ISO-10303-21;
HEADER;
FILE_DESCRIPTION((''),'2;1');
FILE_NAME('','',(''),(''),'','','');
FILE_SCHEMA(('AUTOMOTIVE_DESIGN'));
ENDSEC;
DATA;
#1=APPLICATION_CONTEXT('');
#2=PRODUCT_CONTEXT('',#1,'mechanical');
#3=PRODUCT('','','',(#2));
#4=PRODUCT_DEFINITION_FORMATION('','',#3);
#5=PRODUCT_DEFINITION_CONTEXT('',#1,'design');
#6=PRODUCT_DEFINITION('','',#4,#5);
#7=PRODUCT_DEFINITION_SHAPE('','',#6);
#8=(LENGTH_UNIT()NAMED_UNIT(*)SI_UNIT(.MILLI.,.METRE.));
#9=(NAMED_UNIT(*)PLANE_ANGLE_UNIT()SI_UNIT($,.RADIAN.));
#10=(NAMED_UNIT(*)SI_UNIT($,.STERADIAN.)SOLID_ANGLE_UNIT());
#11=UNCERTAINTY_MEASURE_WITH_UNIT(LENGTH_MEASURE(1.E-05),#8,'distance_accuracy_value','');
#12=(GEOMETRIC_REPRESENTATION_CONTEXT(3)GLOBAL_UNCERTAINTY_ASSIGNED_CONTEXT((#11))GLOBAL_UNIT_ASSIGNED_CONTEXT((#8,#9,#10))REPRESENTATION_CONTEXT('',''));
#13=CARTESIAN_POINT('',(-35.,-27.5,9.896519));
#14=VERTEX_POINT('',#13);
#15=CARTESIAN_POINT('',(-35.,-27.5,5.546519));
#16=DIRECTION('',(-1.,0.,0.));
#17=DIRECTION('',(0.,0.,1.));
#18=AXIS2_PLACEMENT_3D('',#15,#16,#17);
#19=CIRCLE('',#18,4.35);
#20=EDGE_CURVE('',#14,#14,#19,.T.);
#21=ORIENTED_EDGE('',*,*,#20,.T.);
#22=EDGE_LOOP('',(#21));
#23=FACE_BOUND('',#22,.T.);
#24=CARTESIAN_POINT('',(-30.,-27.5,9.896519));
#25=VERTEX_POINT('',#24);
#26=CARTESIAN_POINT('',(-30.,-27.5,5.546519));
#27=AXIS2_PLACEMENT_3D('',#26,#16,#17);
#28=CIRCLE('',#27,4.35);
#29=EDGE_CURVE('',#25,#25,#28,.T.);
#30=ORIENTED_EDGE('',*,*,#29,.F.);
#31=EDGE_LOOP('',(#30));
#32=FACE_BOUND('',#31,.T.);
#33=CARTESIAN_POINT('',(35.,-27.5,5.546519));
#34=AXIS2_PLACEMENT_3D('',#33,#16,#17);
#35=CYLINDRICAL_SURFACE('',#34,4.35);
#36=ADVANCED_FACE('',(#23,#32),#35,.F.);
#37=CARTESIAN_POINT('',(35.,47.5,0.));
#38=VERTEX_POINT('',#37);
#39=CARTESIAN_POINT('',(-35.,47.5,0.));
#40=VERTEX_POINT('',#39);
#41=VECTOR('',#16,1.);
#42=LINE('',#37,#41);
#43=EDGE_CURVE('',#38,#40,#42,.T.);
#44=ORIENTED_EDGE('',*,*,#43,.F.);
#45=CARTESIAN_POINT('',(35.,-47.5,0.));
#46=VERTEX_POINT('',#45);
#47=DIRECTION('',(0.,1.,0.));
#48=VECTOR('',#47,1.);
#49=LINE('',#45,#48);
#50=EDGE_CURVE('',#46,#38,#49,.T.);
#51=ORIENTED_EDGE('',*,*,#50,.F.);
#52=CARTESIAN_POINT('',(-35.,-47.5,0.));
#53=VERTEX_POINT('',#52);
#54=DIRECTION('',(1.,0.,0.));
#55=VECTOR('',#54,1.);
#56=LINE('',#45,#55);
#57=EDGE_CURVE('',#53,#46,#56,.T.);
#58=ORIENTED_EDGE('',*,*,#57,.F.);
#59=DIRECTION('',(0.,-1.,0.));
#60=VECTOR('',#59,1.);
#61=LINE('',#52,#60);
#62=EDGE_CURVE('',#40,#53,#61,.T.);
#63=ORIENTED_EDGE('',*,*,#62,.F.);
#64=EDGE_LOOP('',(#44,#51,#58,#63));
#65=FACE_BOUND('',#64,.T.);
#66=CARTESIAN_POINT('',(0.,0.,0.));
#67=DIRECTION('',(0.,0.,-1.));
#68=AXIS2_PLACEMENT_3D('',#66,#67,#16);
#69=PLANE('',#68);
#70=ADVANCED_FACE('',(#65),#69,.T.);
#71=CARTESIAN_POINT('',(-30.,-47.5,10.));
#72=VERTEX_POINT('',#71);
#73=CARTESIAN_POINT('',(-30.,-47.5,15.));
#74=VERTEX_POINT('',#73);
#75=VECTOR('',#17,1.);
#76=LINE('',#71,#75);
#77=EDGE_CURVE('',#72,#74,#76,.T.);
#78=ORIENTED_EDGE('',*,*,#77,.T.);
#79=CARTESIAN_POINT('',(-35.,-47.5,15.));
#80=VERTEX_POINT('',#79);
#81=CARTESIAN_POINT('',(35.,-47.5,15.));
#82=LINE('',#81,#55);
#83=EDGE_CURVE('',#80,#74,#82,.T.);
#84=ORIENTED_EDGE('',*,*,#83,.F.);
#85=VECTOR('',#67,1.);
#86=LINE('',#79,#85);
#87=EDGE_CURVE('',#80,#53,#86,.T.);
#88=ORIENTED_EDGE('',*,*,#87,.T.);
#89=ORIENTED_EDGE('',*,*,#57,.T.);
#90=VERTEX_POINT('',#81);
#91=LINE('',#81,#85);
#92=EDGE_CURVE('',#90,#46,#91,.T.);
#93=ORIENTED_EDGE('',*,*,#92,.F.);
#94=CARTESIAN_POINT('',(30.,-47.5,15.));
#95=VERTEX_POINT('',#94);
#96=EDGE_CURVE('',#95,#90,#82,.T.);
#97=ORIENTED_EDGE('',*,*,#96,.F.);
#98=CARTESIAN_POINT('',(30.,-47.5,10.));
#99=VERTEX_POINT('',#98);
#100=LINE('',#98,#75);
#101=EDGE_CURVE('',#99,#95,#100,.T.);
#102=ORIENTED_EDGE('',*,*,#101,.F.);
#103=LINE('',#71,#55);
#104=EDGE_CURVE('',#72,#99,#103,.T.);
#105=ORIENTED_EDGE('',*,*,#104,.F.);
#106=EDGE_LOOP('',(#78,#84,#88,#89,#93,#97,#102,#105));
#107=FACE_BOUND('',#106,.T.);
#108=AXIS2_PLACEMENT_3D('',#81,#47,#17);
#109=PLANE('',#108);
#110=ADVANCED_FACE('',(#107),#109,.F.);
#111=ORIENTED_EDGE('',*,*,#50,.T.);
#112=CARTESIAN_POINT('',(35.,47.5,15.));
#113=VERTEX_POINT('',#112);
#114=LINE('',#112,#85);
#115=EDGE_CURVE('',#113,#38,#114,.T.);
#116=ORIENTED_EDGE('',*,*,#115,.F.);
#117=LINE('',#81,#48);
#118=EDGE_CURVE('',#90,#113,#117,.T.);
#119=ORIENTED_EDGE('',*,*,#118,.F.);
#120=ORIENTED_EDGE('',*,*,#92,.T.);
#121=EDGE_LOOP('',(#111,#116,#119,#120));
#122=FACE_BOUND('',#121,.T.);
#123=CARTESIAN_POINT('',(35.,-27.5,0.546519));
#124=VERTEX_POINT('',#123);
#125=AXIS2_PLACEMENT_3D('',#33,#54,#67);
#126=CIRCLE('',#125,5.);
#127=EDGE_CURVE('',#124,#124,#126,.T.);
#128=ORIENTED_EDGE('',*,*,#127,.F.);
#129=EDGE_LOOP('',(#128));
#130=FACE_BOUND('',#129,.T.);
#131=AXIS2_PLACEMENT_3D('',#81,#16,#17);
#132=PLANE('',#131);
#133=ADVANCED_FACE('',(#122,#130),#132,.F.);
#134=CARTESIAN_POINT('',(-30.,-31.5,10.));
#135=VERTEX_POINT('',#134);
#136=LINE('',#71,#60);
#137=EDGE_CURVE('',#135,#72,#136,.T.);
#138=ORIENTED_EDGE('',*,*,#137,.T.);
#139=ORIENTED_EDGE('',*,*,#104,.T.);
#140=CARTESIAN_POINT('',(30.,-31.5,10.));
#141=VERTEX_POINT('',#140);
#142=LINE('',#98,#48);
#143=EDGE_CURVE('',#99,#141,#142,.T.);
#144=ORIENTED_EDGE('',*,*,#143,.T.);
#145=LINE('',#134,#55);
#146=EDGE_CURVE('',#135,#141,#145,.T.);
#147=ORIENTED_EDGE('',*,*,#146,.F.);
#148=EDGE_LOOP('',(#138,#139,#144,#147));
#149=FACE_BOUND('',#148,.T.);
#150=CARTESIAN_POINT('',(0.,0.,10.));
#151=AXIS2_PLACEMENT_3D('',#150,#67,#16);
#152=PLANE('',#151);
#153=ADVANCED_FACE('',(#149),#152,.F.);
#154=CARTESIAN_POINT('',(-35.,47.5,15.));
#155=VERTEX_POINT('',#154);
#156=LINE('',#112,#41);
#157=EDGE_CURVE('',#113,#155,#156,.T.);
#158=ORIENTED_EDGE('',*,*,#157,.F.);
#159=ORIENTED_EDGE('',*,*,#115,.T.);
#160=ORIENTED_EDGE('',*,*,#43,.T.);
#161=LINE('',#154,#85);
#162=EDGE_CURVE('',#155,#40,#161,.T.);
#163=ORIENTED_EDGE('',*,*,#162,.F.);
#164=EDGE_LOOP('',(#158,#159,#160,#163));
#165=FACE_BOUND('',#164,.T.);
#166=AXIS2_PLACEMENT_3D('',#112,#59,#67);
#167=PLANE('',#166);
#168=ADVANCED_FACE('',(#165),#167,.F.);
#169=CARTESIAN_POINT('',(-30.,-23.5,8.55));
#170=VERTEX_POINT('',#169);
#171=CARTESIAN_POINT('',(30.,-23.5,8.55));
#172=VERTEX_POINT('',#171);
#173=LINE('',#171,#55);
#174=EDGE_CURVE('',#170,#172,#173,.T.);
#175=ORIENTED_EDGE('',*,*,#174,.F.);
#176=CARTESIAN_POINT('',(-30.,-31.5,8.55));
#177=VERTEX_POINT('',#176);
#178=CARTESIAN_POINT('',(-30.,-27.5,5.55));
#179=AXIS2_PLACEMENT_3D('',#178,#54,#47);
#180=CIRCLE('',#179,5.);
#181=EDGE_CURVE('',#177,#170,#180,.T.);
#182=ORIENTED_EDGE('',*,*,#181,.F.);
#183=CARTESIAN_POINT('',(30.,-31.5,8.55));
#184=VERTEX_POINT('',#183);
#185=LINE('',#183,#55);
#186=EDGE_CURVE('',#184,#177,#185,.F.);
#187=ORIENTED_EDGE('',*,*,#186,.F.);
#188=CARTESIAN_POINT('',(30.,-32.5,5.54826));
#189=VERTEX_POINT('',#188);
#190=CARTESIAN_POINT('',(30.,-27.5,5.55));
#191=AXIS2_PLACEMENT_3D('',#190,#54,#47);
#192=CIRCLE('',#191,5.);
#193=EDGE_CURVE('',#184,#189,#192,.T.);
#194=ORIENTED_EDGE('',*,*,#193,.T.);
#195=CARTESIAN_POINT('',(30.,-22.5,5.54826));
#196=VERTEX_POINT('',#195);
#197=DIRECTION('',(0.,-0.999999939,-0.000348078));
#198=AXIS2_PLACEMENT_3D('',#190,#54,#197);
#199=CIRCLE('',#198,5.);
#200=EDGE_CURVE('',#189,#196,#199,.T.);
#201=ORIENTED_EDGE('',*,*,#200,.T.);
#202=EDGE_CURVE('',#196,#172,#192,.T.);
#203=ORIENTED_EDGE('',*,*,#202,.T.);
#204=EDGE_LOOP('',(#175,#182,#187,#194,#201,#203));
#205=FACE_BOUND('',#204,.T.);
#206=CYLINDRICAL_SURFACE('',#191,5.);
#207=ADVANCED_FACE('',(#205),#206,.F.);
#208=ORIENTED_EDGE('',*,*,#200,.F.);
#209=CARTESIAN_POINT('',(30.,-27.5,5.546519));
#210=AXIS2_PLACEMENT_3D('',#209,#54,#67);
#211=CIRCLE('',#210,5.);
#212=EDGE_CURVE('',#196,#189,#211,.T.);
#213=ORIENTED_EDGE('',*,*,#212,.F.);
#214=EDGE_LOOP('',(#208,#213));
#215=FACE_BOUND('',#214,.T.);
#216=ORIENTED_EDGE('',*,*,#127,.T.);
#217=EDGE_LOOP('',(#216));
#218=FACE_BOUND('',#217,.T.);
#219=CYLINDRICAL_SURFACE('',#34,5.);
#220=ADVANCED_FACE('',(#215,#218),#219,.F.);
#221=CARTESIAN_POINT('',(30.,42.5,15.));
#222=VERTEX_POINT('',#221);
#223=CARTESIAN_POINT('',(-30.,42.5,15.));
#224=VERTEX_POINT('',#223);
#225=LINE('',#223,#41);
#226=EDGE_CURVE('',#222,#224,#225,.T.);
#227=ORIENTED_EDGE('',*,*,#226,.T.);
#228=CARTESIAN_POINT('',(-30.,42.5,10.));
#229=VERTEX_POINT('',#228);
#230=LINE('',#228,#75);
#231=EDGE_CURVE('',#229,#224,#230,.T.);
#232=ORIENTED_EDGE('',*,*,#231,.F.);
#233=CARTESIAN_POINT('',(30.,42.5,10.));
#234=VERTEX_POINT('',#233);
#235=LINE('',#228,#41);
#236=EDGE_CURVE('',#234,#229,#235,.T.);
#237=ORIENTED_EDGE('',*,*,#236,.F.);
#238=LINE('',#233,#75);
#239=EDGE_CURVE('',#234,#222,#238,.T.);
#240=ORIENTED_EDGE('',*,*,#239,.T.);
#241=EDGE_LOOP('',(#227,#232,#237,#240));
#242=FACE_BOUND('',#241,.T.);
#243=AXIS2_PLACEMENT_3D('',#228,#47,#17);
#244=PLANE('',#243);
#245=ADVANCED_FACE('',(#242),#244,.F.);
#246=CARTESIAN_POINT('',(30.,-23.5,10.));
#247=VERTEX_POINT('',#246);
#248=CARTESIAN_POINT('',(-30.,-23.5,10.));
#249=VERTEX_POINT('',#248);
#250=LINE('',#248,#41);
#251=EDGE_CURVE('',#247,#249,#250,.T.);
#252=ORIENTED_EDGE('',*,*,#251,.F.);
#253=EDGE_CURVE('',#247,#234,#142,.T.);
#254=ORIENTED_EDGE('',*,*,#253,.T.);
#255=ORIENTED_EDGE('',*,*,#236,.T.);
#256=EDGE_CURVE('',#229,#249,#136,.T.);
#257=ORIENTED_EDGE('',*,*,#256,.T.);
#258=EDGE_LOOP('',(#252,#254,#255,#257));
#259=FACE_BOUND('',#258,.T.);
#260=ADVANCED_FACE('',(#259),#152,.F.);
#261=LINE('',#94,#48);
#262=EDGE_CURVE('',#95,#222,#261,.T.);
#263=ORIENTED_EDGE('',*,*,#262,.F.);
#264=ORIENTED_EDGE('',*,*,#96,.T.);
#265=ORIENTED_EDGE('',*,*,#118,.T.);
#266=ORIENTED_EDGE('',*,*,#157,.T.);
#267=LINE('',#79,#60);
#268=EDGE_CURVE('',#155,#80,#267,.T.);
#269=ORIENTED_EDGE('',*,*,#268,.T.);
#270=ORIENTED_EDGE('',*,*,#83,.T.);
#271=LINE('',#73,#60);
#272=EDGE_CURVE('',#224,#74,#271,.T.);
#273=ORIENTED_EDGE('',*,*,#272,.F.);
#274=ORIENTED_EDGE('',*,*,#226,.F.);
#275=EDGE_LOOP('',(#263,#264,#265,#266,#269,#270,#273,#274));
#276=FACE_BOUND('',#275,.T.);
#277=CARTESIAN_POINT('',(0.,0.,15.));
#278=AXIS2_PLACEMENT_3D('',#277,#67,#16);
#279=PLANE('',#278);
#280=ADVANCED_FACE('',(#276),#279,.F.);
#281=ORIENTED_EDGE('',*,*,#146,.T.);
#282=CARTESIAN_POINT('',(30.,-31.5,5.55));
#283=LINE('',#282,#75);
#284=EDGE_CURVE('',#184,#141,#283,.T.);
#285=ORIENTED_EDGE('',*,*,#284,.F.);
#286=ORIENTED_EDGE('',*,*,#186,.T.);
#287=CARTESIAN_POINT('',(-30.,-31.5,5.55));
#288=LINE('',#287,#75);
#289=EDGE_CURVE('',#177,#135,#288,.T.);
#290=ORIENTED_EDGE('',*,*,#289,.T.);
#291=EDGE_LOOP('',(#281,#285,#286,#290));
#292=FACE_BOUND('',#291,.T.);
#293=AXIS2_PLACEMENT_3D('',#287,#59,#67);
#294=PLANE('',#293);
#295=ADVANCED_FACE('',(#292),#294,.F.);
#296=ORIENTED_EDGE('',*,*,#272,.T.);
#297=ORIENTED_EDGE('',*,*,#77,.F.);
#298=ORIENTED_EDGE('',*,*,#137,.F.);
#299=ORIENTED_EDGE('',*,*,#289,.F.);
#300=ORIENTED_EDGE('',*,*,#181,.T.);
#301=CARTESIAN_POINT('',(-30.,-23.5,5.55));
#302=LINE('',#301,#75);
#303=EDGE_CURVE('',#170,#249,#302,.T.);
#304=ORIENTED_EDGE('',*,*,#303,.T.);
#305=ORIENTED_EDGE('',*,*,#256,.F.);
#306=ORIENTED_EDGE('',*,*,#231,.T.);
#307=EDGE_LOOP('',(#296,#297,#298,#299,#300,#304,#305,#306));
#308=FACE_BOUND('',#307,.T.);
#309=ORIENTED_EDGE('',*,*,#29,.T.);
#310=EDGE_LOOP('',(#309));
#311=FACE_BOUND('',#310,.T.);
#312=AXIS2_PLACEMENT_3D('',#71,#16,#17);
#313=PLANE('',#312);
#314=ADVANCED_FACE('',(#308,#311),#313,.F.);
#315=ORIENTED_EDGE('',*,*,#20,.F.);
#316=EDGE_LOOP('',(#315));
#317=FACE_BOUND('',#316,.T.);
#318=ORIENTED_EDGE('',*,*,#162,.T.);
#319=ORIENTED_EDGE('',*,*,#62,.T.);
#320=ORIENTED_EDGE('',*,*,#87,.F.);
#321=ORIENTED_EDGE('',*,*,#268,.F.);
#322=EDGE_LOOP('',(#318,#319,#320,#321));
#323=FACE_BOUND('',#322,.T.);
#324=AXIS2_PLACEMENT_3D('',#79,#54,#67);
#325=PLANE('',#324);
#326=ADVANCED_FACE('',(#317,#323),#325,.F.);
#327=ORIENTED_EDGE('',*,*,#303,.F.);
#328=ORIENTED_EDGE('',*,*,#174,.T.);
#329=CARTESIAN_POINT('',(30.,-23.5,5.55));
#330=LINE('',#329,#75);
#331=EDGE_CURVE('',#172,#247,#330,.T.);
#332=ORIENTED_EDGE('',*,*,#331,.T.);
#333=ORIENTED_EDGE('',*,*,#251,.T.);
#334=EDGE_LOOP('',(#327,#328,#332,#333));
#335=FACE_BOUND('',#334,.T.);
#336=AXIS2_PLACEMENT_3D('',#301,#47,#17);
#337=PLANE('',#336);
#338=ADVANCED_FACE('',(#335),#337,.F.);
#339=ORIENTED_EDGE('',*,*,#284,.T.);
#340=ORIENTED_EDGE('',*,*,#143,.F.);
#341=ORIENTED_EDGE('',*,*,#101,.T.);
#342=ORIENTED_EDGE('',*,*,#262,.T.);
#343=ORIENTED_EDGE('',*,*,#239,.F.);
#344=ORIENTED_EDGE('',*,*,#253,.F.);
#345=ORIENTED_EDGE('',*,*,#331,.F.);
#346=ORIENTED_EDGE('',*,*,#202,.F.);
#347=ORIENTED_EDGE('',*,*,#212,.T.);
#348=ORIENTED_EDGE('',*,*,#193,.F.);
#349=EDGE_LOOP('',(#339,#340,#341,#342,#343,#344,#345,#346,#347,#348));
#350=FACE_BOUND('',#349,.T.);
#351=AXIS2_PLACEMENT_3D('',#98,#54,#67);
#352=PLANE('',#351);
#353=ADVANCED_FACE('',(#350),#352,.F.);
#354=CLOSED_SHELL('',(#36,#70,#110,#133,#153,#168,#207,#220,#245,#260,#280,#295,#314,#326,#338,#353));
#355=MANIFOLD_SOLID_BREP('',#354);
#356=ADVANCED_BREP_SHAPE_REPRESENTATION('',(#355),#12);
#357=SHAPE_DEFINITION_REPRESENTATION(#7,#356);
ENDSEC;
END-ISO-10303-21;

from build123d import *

# Parameters (mm, degrees)
SKETCH1_W               = 95
SKETCH1_H               = 70
BOSS_EXTRUDE1_DEPTH     = 15
SKETCH2_W               = 60
SKETCH2_H               = 90
CUT_EXTRUDE1_DEPTH      = 5
SKETCH4_W               = 60
SKETCH4_H               = 8
CUT_EXTRUDE2_DEPTH      = 4.45
CUT_REVOLVE_THIN1_START = -30
CUT_REVOLVE_THIN1_DEPTH = 60
SKETCH3_R               = 5
CUT_EXTRUDE3_DEPTH      = 82.891696771
SKETCH6_R               = 4.35
CUT_EXTRUDE4_DEPTH      = 86.914201387


# Read off the part's stored shape, not the designer's step: Cut-Revolve-Thin1
with BuildPart() as part:
    # Sketch1 → Boss-Extrude1 (new body)
    with BuildSketch(Plane(origin=(0, 0, 0), x_dir=(0, 1, 0), z_dir=(0, 0, 1))):
        Rectangle(SKETCH1_W, SKETCH1_H)
    extrude(amount=BOSS_EXTRUDE1_DEPTH)

    # Sketch2 → Cut-Extrude1 (cut)
    with BuildSketch(Plane.XY.offset(15)):
        with Locations((0, -2.5)):
            Rectangle(SKETCH2_W, SKETCH2_H)
    extrude(amount=-CUT_EXTRUDE1_DEPTH, mode=Mode.SUBTRACT)

    # Sketch4 → Cut-Extrude2 (cut)
    with BuildSketch(Plane.XY.offset(10)):
        with Locations((0, -27.5)):
            Rectangle(SKETCH4_W, SKETCH4_H)
    extrude(amount=-CUT_EXTRUDE2_DEPTH, mode=Mode.SUBTRACT)

    # Cut-Revolve-Thin1 outline → Cut-Revolve-Thin1 (cut)
    with BuildSketch(Plane.YZ.offset(CUT_REVOLVE_THIN1_START)):
        with BuildLine():
            Line((-31.5, 5.55), (-31.5, 8.55))
            ThreePointArc((-31.5, 8.55), (-27.5, 0.55), (-23.5, 8.55))
            Line((-23.5, 8.55), (-23.5, 5.55))
            Line((-23.5, 5.55), (-31.5, 5.55))
        make_face()
    extrude(amount=CUT_REVOLVE_THIN1_DEPTH, mode=Mode.SUBTRACT)

    # Sketch3 → Cut-Extrude3 (cut, through all)
    with BuildSketch(Plane(origin=(30, 0, 0), x_dir=(0, -1, 0), z_dir=(-1, 0, 0))):
        with Locations(Location((27.5, 5.546519225, 0), (0, 0, 179.980056627))):
            Circle(SKETCH3_R)
    extrude(amount=-CUT_EXTRUDE3_DEPTH, mode=Mode.SUBTRACT)

    # Sketch6 → Cut-Extrude4 (cut, through all)
    with BuildSketch(Plane(origin=(-35, 0, 0), x_dir=(0, -1, 0), z_dir=(-1, 0, 0))):
        with Locations(Location((27.5, 5.546519225, 0), (0, 0, 90))):
            Circle(SKETCH6_R)
    extrude(amount=-CUT_EXTRUDE4_DEPTH, mode=Mode.SUBTRACT)


solid = part.part
